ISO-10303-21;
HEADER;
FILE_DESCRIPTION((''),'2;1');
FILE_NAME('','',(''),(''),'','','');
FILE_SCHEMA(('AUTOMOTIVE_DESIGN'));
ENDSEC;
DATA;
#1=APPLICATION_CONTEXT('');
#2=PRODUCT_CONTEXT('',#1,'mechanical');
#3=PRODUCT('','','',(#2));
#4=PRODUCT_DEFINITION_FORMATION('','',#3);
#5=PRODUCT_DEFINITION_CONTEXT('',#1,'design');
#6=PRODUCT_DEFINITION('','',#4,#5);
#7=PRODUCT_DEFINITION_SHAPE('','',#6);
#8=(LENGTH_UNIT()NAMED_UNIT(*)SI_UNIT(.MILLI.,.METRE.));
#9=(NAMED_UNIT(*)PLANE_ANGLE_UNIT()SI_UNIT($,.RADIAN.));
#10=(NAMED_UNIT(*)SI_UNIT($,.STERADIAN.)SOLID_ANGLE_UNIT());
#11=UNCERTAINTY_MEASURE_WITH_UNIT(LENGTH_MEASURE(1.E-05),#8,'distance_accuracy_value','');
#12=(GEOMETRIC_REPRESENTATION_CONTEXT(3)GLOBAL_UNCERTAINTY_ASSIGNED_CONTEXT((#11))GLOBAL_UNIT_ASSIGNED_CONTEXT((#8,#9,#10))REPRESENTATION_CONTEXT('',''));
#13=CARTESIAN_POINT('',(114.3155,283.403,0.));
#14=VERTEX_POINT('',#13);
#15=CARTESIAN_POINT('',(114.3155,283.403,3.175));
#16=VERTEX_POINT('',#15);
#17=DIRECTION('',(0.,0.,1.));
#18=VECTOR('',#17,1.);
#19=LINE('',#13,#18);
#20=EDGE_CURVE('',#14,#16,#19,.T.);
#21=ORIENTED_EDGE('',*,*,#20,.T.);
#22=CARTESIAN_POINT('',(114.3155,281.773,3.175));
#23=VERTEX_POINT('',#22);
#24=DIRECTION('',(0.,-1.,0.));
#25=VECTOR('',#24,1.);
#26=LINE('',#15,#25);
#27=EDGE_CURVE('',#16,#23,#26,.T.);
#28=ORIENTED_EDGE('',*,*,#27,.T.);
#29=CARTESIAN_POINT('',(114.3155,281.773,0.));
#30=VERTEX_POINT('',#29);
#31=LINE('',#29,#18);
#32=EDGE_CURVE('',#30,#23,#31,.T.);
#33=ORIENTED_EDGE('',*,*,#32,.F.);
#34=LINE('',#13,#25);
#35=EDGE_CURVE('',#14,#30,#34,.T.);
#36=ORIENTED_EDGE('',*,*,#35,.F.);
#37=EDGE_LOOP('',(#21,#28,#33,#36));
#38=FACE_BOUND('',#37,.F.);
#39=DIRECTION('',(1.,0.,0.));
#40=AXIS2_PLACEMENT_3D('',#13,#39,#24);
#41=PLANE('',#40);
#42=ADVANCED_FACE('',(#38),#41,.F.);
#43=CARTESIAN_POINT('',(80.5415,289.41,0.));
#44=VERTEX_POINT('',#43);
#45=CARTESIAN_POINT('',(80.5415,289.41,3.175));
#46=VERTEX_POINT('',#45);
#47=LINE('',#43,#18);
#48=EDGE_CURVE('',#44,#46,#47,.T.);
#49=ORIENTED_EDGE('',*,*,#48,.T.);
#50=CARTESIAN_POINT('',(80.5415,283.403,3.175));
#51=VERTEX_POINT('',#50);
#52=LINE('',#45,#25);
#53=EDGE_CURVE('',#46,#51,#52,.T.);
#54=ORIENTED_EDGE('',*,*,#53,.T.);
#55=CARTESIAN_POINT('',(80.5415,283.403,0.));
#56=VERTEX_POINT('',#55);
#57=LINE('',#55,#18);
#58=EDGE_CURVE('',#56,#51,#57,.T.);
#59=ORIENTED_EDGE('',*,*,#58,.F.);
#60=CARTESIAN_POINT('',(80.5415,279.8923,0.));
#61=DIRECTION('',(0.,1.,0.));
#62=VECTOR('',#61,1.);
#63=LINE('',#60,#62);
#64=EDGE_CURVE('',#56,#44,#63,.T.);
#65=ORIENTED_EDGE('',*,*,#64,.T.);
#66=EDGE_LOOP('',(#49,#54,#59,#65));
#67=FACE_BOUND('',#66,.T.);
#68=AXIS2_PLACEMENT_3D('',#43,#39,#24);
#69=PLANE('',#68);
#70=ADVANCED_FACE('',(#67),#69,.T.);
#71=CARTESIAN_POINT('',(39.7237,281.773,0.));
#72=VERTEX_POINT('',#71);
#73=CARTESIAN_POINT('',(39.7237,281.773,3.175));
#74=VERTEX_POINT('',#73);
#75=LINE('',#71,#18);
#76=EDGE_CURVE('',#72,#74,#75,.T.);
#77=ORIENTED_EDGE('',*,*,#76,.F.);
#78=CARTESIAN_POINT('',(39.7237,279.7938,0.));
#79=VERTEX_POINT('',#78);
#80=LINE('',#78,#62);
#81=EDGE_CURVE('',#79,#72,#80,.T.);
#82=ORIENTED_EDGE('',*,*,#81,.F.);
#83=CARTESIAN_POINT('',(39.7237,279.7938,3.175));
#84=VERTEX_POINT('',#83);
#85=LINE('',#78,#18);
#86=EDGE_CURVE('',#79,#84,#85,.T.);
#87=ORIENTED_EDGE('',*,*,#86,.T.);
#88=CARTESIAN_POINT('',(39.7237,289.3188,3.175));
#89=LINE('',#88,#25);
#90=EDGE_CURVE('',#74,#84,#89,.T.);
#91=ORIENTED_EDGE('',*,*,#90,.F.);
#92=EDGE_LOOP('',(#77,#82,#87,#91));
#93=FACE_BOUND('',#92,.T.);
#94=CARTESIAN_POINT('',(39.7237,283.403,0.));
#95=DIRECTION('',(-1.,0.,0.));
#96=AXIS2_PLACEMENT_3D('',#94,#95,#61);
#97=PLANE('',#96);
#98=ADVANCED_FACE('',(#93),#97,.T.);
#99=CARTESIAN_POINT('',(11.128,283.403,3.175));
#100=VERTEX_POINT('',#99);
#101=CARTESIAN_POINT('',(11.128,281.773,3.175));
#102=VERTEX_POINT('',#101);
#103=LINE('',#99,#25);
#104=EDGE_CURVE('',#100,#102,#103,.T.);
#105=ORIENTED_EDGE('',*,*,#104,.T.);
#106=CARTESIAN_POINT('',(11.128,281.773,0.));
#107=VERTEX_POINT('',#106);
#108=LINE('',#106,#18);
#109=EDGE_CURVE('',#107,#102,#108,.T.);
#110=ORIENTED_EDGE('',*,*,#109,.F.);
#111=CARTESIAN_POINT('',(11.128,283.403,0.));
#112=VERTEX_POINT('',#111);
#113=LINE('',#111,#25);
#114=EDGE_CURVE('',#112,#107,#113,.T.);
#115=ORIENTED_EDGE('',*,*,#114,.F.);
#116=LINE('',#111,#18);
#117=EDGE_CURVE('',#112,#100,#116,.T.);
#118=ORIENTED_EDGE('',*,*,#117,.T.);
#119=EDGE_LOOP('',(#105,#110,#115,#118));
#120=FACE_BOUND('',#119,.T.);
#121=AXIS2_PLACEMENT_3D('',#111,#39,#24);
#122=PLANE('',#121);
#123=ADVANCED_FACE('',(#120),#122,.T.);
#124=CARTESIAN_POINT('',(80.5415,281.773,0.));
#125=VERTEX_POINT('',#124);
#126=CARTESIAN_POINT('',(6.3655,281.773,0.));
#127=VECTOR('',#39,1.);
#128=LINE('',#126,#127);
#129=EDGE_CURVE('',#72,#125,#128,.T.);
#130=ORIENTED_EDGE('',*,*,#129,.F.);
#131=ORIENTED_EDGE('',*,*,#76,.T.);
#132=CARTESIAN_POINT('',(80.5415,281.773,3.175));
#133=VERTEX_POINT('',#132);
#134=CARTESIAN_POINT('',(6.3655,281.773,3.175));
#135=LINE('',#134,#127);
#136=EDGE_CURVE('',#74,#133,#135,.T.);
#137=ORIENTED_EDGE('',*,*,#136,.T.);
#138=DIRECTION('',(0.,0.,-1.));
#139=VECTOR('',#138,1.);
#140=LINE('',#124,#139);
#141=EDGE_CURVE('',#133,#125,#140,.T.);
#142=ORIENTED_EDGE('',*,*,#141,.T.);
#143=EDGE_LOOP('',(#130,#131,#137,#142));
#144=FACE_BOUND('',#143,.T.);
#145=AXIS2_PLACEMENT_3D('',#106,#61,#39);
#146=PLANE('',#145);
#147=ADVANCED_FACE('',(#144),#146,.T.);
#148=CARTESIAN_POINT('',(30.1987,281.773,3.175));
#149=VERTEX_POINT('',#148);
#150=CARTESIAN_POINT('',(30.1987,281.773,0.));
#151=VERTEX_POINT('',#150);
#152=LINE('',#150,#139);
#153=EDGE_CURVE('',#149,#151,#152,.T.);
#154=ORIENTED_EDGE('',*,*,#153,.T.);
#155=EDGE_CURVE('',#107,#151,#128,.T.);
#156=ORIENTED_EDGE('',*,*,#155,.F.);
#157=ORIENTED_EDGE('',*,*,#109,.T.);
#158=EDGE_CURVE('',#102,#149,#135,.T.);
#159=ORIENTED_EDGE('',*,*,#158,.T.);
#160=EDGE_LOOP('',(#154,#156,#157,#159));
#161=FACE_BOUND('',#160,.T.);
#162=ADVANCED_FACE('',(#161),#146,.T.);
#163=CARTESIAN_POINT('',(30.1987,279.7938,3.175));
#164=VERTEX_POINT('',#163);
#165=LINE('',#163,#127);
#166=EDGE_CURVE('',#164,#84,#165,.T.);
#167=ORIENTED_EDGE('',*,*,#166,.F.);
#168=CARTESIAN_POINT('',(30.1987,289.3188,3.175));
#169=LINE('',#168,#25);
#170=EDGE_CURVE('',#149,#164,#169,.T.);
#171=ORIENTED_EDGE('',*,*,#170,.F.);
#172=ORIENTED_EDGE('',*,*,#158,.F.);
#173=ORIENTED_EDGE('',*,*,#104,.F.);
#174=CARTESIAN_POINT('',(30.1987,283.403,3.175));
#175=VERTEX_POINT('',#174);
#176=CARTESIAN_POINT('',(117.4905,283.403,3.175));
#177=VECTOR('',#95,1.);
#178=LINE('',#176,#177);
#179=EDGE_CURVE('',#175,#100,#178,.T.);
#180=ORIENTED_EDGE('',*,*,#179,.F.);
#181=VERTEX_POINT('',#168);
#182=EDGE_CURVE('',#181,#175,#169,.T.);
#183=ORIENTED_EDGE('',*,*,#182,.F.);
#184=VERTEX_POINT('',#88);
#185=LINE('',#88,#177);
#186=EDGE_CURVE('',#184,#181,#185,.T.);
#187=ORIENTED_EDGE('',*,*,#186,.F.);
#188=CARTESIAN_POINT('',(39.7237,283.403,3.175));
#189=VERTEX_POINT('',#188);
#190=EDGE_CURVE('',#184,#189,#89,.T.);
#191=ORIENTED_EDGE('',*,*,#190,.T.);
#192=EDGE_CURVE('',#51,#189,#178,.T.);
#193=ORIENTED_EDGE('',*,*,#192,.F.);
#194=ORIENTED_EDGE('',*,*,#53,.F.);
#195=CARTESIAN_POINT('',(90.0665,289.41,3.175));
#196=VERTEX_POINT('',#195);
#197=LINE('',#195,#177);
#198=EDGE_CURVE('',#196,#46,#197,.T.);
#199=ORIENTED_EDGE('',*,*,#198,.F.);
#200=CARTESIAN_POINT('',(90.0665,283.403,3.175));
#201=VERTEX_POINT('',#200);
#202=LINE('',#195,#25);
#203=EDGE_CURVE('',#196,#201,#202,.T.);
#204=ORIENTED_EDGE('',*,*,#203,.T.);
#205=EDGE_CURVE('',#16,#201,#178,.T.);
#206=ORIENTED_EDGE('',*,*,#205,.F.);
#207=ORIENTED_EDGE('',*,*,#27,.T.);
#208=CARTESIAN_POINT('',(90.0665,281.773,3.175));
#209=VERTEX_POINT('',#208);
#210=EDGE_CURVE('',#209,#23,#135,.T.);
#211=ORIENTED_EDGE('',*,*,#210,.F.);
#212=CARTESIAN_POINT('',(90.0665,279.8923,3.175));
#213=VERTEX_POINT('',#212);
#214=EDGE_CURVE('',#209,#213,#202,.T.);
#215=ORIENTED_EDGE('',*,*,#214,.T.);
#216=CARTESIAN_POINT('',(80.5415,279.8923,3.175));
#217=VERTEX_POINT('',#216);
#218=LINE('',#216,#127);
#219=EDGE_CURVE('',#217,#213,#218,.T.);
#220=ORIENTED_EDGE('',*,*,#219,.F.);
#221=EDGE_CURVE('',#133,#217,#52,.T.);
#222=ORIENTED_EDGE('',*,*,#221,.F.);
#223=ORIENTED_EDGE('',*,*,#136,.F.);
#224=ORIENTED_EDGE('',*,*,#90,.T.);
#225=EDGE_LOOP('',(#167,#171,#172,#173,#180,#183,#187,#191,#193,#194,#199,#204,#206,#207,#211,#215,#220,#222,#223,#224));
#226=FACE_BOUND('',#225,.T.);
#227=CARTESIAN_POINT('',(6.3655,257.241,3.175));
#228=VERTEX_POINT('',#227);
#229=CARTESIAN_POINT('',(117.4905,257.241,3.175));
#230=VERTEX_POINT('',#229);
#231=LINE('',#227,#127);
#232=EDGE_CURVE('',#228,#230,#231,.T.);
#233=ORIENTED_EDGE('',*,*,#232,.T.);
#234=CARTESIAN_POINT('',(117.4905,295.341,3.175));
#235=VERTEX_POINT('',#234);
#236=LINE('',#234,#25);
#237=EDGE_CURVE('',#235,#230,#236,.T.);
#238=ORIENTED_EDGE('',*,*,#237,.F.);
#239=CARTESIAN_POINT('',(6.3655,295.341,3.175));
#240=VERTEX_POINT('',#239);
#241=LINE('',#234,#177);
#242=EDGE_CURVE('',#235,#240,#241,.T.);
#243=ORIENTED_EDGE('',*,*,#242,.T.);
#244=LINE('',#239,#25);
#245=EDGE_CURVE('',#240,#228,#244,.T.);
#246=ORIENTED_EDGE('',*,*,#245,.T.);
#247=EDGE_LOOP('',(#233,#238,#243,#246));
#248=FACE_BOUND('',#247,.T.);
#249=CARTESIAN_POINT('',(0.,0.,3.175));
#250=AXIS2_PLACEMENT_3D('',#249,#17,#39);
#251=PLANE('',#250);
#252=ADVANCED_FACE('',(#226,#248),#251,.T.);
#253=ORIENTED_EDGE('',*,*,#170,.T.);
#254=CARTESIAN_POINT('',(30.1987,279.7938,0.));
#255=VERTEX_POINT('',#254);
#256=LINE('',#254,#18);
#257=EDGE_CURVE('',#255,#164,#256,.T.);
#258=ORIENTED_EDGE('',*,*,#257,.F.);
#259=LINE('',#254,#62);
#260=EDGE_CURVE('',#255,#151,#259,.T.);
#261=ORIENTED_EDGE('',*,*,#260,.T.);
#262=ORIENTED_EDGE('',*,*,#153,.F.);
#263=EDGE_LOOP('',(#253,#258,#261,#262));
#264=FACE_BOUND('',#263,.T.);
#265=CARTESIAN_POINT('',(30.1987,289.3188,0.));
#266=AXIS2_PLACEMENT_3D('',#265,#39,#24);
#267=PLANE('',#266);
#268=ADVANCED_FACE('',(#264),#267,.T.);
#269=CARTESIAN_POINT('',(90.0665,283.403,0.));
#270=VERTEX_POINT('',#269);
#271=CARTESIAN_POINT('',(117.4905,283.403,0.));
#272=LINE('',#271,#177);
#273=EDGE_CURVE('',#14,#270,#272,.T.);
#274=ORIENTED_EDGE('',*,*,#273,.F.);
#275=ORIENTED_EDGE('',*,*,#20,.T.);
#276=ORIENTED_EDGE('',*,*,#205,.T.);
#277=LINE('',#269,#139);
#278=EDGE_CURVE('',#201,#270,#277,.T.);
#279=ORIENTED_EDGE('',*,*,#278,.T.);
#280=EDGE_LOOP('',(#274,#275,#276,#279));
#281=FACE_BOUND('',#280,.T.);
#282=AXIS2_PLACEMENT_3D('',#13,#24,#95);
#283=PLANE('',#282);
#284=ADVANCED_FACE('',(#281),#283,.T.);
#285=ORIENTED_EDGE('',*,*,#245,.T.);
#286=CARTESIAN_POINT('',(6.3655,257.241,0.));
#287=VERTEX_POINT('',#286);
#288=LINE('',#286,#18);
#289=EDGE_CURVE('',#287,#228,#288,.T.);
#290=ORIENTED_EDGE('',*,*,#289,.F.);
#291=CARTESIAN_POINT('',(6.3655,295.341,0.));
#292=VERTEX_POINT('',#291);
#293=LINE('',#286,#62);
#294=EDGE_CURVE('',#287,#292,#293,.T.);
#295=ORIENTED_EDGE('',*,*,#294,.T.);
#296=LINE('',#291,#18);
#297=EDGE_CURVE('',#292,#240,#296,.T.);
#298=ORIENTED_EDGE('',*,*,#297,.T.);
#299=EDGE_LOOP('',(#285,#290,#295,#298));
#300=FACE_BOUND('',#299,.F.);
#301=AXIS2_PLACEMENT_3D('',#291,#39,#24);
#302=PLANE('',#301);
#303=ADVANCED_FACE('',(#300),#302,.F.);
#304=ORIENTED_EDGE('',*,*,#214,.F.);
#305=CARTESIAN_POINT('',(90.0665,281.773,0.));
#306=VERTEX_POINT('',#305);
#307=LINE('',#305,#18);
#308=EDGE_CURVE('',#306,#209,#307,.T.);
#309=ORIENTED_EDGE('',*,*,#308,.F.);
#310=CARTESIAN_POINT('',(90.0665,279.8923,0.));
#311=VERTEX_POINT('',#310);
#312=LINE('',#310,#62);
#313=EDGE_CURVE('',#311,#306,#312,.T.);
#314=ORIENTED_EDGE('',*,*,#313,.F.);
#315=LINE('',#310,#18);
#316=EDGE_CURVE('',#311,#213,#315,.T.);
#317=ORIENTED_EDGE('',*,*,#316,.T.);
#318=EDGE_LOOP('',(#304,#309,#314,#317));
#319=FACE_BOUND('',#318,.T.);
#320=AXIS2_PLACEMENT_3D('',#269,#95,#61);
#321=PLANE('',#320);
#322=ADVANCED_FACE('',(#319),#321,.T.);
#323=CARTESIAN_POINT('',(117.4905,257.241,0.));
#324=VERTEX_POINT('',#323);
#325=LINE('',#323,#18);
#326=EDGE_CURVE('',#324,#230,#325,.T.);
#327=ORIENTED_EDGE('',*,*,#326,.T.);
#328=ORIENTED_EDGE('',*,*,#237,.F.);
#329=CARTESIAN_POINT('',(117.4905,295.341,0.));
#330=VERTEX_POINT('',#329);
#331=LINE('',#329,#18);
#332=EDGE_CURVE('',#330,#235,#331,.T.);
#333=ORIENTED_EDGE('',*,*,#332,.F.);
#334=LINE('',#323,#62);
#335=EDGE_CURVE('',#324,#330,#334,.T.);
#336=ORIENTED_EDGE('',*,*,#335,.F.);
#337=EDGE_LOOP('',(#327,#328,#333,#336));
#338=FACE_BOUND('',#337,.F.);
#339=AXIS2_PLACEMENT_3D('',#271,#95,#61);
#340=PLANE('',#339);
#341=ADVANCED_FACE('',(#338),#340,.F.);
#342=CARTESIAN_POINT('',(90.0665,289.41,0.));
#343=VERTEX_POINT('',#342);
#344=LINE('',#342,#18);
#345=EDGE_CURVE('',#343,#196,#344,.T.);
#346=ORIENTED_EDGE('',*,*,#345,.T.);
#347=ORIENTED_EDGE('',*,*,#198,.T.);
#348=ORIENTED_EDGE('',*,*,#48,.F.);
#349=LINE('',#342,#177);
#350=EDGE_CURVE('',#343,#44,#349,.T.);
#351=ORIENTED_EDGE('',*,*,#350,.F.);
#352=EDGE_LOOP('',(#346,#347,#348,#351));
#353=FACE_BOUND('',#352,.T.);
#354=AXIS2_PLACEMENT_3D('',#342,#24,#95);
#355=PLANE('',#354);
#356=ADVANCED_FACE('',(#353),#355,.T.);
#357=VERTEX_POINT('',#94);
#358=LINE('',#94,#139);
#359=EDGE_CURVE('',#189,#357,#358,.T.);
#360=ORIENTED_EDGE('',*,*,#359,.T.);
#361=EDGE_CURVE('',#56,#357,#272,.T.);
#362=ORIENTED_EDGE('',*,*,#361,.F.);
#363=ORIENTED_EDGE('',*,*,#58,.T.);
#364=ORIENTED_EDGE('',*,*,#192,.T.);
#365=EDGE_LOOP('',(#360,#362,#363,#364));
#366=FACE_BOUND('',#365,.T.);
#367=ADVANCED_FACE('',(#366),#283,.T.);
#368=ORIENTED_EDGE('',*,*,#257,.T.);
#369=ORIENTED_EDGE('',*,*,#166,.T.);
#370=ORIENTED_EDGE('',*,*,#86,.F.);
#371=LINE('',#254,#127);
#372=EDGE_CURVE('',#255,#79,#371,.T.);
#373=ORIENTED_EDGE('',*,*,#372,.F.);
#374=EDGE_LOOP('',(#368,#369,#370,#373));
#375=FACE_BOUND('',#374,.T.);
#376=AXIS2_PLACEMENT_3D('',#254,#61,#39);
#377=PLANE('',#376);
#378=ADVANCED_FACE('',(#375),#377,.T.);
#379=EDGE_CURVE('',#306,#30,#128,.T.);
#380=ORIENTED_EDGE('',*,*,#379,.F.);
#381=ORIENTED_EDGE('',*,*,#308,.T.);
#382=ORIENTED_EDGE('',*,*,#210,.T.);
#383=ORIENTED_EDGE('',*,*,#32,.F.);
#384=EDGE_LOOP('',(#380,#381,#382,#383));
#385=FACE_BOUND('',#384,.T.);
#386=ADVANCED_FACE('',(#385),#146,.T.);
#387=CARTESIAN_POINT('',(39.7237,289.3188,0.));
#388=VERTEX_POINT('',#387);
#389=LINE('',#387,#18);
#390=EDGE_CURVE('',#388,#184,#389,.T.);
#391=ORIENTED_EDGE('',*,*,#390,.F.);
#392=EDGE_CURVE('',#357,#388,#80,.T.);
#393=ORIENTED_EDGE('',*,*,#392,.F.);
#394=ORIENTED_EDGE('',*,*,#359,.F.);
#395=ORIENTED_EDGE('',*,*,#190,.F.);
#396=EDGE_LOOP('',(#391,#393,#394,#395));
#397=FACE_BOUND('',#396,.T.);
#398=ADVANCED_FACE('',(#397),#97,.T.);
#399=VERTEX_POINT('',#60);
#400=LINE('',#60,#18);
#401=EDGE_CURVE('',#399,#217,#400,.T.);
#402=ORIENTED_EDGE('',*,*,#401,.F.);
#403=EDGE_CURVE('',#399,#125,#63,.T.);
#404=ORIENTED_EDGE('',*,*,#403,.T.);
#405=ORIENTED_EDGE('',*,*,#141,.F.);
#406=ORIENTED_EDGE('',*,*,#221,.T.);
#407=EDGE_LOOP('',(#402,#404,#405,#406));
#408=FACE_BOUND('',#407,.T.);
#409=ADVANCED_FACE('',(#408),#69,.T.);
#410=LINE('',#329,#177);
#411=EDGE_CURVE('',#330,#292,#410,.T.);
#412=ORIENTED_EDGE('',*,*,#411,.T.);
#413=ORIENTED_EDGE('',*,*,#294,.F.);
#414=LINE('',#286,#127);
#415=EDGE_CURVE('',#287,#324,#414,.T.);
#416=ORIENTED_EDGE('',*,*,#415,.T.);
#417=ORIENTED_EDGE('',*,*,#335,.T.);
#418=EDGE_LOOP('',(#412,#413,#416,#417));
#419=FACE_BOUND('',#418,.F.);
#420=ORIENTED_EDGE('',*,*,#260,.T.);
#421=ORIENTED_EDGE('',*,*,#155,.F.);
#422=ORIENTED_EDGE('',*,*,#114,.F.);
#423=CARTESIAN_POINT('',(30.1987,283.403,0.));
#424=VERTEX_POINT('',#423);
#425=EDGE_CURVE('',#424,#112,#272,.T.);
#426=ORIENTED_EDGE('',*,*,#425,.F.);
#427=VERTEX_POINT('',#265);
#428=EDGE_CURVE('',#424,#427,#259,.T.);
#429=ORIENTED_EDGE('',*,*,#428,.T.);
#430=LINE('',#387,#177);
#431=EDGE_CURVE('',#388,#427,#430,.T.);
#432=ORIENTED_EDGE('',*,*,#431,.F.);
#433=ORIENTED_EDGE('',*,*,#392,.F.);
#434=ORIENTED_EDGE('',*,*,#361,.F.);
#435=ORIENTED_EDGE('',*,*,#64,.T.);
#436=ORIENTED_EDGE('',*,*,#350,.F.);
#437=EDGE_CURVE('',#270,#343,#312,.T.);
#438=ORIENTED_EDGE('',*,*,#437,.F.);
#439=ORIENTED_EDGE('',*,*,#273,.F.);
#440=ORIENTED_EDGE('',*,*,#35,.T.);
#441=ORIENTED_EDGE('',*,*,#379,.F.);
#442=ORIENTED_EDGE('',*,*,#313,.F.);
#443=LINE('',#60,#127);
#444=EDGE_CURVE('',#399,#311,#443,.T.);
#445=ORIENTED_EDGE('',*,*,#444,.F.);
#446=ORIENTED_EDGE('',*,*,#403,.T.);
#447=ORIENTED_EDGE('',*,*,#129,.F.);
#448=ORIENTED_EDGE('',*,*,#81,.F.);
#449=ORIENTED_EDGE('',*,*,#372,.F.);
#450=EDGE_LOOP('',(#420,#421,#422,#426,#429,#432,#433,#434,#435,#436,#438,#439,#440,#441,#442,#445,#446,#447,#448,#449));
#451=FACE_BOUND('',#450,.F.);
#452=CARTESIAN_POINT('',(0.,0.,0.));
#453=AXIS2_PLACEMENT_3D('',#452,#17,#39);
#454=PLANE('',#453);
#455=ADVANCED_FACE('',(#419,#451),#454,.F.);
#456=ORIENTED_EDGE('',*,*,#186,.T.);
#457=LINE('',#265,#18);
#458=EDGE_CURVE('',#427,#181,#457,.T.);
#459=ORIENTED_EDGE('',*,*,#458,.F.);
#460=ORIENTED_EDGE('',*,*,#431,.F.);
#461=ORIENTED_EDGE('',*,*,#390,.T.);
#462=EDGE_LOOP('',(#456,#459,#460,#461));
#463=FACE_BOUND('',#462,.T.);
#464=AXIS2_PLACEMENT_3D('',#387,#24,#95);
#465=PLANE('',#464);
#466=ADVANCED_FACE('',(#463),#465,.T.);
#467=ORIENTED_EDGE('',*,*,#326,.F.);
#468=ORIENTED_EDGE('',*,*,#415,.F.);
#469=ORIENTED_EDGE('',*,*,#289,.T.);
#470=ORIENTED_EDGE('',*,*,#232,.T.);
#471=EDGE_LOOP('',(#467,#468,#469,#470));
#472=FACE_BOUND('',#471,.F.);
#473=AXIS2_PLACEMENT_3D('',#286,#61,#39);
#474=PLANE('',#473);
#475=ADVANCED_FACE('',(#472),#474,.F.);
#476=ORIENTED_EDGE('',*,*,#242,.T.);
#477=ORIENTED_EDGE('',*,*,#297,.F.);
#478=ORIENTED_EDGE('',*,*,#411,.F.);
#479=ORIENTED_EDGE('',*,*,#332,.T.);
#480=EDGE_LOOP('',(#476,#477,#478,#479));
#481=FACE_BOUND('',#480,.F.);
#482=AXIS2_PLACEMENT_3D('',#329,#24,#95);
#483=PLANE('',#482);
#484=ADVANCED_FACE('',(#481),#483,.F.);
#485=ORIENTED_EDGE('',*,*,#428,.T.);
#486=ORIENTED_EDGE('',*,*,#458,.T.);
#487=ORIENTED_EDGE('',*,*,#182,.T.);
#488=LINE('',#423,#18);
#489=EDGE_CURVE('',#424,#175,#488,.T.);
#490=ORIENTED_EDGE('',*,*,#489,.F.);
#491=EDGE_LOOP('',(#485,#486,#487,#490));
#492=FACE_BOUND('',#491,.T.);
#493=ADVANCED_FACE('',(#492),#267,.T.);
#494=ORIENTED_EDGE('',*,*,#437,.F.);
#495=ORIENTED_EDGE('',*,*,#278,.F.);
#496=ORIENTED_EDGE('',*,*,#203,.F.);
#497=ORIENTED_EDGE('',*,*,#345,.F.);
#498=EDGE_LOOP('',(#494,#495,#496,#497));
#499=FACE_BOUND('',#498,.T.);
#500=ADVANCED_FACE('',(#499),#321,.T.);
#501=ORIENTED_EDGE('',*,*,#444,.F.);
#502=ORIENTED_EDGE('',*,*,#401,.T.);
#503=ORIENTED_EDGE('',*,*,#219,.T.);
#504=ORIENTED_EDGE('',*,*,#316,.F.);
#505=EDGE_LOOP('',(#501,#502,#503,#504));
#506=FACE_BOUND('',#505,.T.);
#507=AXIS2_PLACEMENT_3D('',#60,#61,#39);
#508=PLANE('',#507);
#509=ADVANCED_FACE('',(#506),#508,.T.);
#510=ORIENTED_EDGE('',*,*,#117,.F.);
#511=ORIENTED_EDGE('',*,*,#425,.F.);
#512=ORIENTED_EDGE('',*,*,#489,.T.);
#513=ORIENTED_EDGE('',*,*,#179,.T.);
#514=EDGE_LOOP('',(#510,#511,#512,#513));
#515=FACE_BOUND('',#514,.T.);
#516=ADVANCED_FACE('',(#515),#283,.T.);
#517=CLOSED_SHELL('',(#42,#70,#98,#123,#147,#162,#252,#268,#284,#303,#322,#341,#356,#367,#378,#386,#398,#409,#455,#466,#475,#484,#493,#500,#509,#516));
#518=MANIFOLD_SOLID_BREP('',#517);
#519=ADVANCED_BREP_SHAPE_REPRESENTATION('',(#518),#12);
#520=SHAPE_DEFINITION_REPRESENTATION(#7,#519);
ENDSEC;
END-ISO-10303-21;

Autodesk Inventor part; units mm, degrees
ref_plane "YZ Plane" through (0, 0, 0) normal (1, 0, 0) x (0, 1, 0)
ref_plane "XZ Plane" through (0, 0, 0) normal (0, 1, 0) x (-1, 0, 0)
ref_plane "XY Plane" through (0, 0, 0) normal (0, 0, 1) x (1, 0, 0)
sketch "Sketch1" plane through (0, 0, 0) normal (0, 0, 1) x (1, 0, 0)
  line L0 (117.4905, 295.341) -> (6.3655, 295.341)
  line L1 (6.3655, 295.341) -> (6.3655, 257.241)
  line L2 (6.3655, 257.241) -> (117.4905, 257.241)
  line L3 (117.4905, 257.241) -> (117.4905, 295.341)
  line L4 (117.4905, 283.403) -> (6.3655, 283.403)
  line L5 (6.3655, 283.403) -> (6.3655, 281.773)
  line L6 (6.3655, 281.773) -> (117.4905, 281.773)
  line L7 (117.4905, 281.773) -> (117.4905, 283.403)
  line L8 (117.4905, 281.773) -> (117.4905, 283.403)
  line L9 (6.3655, 283.403) -> (11.128, 283.403)
  line L10 (11.128, 283.403) -> (11.128, 281.773)
  line L11 (11.128, 281.773) -> (6.3655, 281.773)
  line L12 (6.3655, 281.773) -> (6.3655, 283.403)
  line L13 (117.4905, 283.403) -> (114.3155, 283.403)
  line L14 (114.3155, 283.403) -> (114.3155, 281.773)
  line L15 (114.3155, 281.773) -> (117.4905, 281.773)
  line L16 (117.4905, 281.773) -> (117.4905, 283.403)
  point P0 (0, 0)
  dimension "d0" = 38.1
  dimension "d1" = 111.125
  dimension "d2" = 1.63
  dimension "d3" = 11.938
  dimension "d23" = 103.1875
  dimension "d24" = 3.175
extrude "Extrusion1" add sketch "Sketch1" along normal blind 3.175 contours L3 L4 L1 L0 | L3 L6 L14 L4 | L4 L10 L6 L1 | L3 L2 L1 L6
sketch "Sketch2" plane through (0, 0, 0) normal (0, 0, -1) x (-1, 0, 0)
  line L0 (-114.3155, 283.403) -> (-11.128, 283.403) projected
  line L1 (-39.7237, 289.3188) -> (-30.1987, 289.3188)
  line L2 (-30.1987, 289.3188) -> (-30.1987, 279.7938)
  line L3 (-30.1987, 279.7938) -> (-39.7237, 279.7938)
  line L4 (-39.7237, 279.7938) -> (-39.7237, 289.3188)
  line L5 (-90.0665, 289.41) -> (-80.5415, 289.41)
  line L6 (-80.5415, 289.41) -> (-80.5415, 279.8923)
  line L7 (-80.5415, 279.8923) -> (-90.0665, 279.8923)
  line L8 (-90.0665, 279.8923) -> (-90.0665, 289.41)
  line L9 (-6.3655, 257.241) -> (-117.4905, 257.241) projected
  line L10 (-67.3255, 257.241) -> (-44.4655, 257.241)
  line L11 (-117.4905, 295.341) -> (-6.3655, 295.341) projected
  line L12 (-53.9905, 295.341) -> (-41.2905, 295.341)
  point P0 (0, 0)
  point P1 (-117.4905, 283.403)
  point P2 (-6.3655, 283.403)
  dimension "d8" = 9.525
  dimension "d9" = 9.5177
  dimension "d10" = 9.525
  dimension "d11" = 9.525
  dimension "d13" = 5.9159
extrude "Extrusion2" cut sketch "Sketch2" against normal blind 3.175
properties part number "FrontBulkhead"
